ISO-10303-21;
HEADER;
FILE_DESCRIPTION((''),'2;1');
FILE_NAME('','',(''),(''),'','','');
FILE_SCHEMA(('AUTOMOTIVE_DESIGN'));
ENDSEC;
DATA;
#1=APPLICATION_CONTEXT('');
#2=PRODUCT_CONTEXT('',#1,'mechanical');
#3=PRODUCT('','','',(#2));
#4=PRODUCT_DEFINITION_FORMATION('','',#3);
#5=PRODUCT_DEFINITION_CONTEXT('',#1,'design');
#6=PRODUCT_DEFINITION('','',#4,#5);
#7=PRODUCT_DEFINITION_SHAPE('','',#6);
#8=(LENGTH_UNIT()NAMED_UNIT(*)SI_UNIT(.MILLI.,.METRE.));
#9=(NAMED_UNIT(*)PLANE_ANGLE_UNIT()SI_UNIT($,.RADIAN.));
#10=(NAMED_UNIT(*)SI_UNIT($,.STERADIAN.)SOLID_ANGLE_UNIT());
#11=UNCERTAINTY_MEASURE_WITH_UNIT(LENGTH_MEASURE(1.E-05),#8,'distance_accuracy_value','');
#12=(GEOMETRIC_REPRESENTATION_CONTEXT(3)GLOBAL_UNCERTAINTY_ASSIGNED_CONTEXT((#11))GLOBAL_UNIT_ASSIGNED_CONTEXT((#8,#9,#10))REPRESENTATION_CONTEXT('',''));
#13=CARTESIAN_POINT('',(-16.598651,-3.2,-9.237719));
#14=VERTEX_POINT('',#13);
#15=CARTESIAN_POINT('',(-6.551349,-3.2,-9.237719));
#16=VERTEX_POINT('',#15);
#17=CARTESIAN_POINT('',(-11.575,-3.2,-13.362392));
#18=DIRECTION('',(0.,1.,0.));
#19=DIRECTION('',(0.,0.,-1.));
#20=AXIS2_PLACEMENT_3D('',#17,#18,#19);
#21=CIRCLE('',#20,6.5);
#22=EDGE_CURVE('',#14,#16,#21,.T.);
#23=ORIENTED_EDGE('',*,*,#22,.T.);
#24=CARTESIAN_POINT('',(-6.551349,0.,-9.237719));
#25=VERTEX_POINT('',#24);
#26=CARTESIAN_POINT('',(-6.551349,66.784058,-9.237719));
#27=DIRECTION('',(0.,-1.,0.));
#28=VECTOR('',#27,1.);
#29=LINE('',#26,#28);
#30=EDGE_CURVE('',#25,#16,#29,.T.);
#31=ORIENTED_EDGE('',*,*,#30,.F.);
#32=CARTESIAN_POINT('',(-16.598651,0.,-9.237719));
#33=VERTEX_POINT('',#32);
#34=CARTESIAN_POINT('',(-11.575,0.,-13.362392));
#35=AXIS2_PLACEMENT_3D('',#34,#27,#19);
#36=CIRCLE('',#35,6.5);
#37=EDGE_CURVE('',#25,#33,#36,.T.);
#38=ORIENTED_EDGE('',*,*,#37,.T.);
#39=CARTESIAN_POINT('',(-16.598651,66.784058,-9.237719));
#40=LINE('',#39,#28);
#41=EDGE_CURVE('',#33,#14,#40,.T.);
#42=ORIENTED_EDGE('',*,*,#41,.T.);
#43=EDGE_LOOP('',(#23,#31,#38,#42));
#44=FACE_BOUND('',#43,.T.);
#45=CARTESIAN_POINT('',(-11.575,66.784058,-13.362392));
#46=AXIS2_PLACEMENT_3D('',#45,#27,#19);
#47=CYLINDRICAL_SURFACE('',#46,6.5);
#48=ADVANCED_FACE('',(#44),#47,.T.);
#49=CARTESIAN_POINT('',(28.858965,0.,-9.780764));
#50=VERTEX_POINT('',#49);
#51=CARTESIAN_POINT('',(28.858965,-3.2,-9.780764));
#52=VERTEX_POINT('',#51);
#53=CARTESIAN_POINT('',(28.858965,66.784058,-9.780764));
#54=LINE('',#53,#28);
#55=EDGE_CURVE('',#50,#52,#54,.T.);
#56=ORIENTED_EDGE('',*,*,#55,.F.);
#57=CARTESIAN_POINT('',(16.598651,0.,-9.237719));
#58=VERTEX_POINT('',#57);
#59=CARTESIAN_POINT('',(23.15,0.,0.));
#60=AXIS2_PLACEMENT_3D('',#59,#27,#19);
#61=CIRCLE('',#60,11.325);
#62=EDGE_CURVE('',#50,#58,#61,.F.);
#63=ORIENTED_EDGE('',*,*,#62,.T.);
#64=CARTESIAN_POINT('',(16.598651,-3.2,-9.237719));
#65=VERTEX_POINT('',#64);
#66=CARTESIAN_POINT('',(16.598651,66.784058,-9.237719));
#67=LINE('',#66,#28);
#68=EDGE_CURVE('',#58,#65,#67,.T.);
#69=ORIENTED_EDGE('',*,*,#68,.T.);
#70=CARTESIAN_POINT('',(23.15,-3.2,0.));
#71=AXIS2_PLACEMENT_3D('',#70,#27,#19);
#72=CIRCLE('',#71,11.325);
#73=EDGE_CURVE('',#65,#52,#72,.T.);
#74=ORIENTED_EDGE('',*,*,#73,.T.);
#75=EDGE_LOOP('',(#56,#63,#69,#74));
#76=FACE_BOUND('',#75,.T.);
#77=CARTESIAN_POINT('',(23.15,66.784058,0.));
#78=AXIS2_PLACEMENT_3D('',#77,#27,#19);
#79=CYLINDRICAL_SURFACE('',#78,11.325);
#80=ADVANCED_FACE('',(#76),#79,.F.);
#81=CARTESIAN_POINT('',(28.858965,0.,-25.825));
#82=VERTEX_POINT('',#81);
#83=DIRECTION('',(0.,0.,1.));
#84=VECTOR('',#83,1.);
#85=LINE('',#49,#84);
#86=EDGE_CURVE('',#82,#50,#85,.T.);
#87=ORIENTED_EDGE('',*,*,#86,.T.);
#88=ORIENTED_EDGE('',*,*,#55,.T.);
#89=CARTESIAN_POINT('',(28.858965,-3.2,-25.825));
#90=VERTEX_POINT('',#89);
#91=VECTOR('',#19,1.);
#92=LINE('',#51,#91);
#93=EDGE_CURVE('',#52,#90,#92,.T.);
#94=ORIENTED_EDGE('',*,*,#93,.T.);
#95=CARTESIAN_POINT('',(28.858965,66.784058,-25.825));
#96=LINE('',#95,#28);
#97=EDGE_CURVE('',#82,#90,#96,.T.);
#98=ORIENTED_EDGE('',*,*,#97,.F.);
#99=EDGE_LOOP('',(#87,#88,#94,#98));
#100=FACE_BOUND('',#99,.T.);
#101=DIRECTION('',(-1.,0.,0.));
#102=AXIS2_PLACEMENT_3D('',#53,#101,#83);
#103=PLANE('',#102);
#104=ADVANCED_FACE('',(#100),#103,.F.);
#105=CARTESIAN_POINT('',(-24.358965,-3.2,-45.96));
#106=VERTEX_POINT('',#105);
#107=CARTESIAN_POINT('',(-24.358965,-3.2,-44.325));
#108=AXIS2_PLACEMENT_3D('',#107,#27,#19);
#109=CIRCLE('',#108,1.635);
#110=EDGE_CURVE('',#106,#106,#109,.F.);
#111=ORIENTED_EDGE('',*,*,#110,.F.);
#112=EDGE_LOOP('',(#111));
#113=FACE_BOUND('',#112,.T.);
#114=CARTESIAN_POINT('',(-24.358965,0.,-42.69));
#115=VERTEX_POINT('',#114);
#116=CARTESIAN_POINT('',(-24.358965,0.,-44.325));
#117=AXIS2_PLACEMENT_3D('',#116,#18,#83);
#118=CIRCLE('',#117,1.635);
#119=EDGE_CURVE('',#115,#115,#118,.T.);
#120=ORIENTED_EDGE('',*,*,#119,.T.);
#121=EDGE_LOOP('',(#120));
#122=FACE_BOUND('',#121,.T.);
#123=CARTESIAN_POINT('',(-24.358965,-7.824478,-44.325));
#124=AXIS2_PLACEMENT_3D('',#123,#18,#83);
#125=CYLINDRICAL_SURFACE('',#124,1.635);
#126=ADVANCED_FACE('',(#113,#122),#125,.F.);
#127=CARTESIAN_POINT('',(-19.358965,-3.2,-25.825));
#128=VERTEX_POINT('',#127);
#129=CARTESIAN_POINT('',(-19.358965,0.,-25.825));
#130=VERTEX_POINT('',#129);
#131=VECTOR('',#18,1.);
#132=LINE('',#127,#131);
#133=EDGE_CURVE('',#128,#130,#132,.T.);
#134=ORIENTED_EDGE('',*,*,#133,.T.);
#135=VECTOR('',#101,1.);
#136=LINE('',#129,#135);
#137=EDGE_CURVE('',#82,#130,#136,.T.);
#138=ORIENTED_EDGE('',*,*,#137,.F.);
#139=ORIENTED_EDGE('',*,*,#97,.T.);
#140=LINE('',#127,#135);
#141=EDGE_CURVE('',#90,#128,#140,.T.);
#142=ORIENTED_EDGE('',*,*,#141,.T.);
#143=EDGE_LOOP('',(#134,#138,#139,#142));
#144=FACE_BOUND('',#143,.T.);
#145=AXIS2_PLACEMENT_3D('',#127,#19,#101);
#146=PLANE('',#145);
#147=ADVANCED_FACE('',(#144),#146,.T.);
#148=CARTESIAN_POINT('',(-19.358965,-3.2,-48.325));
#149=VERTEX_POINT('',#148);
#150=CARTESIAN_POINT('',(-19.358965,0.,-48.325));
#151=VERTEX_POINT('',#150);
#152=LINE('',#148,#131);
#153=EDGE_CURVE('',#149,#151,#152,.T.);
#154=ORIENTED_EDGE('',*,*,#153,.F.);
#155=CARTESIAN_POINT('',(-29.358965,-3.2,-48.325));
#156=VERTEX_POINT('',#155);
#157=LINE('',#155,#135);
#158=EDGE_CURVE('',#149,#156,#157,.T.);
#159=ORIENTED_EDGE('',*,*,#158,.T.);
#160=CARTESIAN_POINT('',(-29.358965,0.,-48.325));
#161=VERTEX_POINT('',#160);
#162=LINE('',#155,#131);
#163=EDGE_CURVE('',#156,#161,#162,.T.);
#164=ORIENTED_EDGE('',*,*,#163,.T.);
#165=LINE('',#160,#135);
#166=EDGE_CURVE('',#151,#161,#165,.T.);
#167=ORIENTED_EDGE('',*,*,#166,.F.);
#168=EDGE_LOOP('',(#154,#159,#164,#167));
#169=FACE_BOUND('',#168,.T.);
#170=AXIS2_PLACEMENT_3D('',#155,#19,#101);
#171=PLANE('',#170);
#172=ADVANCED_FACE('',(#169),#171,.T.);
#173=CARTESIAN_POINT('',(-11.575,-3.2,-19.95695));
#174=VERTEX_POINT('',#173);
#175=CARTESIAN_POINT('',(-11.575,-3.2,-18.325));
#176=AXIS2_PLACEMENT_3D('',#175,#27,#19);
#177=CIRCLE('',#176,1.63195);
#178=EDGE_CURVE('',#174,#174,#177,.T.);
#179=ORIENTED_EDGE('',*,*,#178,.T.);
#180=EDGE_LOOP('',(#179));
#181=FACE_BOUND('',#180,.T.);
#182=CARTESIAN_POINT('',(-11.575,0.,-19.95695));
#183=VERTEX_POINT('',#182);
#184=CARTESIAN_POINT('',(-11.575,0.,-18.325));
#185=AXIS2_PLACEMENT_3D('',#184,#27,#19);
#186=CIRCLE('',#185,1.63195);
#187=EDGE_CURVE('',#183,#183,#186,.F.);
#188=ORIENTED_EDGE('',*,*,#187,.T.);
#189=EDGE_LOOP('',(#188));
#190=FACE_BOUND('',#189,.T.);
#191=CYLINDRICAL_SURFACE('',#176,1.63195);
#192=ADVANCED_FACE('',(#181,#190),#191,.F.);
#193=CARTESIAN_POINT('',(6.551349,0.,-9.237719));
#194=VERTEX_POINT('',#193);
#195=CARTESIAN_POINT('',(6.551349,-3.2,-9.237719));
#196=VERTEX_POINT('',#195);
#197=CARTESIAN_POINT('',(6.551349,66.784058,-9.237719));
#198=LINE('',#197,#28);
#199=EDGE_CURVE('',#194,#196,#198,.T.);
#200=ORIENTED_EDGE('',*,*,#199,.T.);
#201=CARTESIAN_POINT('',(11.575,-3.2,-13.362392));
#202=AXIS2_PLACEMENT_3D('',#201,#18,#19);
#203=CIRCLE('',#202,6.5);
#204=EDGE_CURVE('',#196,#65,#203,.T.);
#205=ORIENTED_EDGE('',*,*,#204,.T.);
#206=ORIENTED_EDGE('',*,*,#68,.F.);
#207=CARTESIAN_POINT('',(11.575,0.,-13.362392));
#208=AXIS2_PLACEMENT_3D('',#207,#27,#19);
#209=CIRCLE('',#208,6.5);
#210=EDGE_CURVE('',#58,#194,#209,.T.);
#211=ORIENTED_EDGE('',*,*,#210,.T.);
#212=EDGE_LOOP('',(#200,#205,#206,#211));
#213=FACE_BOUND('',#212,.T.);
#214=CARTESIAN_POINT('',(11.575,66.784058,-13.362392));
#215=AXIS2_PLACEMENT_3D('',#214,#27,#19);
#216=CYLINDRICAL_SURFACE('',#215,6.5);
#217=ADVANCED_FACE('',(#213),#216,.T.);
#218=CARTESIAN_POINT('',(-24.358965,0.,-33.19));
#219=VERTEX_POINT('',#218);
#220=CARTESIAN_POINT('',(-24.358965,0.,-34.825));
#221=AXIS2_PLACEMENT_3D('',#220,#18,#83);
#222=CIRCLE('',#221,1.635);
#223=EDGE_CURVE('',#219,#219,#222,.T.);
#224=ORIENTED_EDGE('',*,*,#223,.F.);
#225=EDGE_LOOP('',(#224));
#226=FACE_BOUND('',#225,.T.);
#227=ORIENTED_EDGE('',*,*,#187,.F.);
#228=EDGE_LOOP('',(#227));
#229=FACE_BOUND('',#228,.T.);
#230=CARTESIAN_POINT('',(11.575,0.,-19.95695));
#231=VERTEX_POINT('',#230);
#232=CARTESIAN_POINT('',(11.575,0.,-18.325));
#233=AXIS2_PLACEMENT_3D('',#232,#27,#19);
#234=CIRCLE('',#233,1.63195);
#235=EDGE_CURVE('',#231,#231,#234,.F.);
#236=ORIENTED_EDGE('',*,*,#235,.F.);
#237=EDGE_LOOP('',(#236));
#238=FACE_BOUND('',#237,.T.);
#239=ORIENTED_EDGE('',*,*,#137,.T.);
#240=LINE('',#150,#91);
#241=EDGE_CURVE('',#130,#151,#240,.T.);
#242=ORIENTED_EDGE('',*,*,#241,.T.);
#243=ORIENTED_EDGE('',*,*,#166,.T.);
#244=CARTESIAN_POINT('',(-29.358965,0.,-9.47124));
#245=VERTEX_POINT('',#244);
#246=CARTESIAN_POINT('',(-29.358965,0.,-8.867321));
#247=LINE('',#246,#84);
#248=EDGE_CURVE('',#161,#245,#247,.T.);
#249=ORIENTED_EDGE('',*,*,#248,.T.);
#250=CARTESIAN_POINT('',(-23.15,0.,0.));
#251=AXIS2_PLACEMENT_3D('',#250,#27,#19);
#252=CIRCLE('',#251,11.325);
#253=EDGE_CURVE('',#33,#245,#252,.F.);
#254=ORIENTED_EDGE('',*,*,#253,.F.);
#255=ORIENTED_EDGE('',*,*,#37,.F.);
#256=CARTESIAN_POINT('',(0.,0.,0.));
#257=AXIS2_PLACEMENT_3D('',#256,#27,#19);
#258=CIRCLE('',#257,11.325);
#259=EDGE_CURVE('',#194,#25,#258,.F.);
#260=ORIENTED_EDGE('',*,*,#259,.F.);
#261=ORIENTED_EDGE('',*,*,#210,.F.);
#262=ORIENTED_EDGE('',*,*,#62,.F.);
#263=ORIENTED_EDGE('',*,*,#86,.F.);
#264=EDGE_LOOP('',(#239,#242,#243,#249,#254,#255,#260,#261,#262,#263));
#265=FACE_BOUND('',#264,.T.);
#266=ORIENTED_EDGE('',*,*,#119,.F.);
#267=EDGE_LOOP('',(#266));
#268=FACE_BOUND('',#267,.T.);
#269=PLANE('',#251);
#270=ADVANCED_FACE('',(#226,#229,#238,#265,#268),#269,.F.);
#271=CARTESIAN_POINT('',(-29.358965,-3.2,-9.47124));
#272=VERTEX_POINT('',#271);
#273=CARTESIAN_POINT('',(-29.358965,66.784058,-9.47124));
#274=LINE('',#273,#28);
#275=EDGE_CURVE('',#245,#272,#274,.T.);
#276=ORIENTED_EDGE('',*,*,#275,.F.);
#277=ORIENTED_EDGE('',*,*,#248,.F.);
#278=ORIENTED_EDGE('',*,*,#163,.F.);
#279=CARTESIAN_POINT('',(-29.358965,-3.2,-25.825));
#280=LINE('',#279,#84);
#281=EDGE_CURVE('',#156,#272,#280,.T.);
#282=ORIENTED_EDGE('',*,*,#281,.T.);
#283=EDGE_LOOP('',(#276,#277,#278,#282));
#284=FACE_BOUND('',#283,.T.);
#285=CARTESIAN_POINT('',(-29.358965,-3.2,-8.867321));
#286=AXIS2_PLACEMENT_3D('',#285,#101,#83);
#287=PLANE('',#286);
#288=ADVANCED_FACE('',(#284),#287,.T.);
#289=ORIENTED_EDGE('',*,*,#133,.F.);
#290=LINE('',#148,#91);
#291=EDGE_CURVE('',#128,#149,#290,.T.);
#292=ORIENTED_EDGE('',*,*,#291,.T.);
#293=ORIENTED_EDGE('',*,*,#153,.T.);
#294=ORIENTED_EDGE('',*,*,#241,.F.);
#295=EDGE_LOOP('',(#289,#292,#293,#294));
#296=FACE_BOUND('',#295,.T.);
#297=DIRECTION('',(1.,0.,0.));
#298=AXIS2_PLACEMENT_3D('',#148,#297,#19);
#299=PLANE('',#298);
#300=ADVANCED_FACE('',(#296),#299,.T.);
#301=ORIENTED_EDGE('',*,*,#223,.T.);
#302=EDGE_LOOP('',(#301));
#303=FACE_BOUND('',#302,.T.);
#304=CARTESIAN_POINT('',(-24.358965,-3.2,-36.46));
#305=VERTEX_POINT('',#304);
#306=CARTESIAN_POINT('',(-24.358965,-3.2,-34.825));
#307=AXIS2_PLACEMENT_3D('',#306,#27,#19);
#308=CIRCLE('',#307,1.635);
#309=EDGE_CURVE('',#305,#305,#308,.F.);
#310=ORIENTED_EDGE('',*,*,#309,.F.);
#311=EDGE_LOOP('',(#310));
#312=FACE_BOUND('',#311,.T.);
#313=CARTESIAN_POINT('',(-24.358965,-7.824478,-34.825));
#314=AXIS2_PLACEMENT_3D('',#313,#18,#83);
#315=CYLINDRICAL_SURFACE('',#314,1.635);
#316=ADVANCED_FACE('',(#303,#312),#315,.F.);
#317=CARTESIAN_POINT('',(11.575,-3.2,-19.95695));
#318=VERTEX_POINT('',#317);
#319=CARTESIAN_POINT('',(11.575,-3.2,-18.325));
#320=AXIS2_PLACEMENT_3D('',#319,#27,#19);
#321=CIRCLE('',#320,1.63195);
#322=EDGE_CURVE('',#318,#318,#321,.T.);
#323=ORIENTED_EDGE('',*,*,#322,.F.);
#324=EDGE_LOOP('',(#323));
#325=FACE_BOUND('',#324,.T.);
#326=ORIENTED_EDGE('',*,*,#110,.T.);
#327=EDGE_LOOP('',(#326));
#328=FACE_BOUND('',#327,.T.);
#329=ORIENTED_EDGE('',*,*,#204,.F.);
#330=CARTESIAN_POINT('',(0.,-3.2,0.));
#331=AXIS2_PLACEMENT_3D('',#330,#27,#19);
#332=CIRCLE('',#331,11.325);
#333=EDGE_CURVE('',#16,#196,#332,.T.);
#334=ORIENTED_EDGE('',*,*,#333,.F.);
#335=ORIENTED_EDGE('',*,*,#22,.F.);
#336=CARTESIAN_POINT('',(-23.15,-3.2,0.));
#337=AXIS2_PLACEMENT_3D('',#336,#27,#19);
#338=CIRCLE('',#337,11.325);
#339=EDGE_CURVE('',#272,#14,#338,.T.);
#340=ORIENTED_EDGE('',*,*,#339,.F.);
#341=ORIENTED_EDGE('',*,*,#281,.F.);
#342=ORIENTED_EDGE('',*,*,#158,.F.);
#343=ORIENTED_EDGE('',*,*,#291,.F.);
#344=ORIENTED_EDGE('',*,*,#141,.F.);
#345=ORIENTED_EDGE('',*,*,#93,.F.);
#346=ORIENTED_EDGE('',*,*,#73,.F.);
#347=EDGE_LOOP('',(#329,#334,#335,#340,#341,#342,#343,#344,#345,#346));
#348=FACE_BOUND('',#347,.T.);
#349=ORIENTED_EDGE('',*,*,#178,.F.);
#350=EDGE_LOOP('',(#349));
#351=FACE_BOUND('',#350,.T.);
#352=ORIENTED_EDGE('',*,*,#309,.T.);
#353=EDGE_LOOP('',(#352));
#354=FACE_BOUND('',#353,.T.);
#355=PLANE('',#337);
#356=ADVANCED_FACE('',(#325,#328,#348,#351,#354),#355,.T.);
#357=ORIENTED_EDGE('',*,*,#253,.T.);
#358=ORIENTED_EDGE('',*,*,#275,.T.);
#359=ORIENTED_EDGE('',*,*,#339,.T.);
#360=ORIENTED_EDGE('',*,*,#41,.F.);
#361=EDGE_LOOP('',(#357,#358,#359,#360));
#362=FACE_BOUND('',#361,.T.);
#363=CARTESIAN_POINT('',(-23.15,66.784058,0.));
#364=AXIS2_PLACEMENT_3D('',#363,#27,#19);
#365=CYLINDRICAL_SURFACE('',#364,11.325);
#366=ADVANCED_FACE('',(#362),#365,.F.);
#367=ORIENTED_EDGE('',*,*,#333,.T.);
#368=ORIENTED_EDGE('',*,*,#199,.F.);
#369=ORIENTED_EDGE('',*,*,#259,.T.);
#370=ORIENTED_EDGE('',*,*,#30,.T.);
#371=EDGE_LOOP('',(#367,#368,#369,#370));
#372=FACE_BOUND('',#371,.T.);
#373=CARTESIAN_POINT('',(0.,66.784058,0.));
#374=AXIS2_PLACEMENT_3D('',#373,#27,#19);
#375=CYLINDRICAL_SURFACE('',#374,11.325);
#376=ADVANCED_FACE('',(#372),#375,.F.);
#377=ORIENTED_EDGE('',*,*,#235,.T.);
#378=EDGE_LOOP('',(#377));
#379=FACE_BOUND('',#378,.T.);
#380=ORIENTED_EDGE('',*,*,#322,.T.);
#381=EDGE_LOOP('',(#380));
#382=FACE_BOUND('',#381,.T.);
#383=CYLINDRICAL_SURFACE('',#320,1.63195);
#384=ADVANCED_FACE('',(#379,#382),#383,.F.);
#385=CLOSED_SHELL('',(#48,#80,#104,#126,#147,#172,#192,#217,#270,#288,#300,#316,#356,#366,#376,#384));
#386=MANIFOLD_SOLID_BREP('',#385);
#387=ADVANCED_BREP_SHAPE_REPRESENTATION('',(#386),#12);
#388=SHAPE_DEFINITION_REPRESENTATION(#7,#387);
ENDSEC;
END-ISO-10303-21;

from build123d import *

# Parameters (mm, degrees)
BASE_FLANGE1_DEPTH        = 3.2
SKETCH8_R                 = 1.635
CUT_EXTRUDE1_DEPTH        = 3.2
F_4_CLEARANCE_HOLE2_D     = 3.2639
F_4_CLEARANCE_HOLE2_DEPTH = 3.2
F_4_CLEARANCE_HOLE2_TIP   = 0.980574487
CUT_EXTRUDE2_DEPTH        = 3.2


# Sheet-metal steps are written as plain solids
with BuildPart() as part:
    # Sketch3 → Base-Flange1 (new body)
    with BuildSketch(Plane(origin=(0, 0, 0), x_dir=(1, 0, 0), z_dir=(0, 1, 0))):
        with BuildLine():
            Line((-29.358964924, 8.867320879), (-29.358964924, 25.825))
            Line((-29.358964924, 25.825), (-29.358964924, 48.325))
            Line((-29.358964924, 48.325), (-19.358964924, 48.325))
            Line((-19.358964924, 48.325), (-19.358964924, 25.825))
            Line((-19.358964924, 25.825), (29.358964924, 25.825))
            Line((29.358964924, 25.825), (29.358964924, 8.867320879))
            ThreePointArc((29.358964924, 8.867320879), (23.15, 10.825), (16.941035076, 8.867320879))
            ThreePointArc((16.941035076, 8.867320879), (11.575, 6.362392354), (6.208964924, 8.867320879))
            ThreePointArc((6.208964924, 8.867320879), (0, 10.825), (-6.208964924, 8.867320879))
            ThreePointArc((-6.208964924, 8.867320879), (-11.575, 6.362392354), (-16.941035076, 8.867320879))
            ThreePointArc((-16.941035076, 8.867320879), (-23.15, 10.825), (-29.358964924, 8.867320879))
        make_face()
    extrude(amount=-BASE_FLANGE1_DEPTH)

    # Sketch8 → Cut-Extrude1 (cut)
    with BuildSketch(Plane(origin=(0, 0, 0), x_dir=(1, 0, 0), z_dir=(0, 1, 0))):
        with Locations(Location((-24.358964924, 44.325, 0), (0, 0, 270))):
            Circle(SKETCH8_R)
        with Locations(Location((-24.358964924, 34.825, 0), (0, 0, 270))):
            Circle(SKETCH8_R)
    extrude(amount=-CUT_EXTRUDE1_DEPTH, mode=Mode.SUBTRACT)

    # #4 Clearance Hole2
    with Locations(Plane.XZ.offset(3.2)):
        with Locations((11.575, -18.325), (-11.575, -18.325)):
            Hole(F_4_CLEARANCE_HOLE2_D / 2, depth=F_4_CLEARANCE_HOLE2_DEPTH)
            with Locations((0, 0, -(F_4_CLEARANCE_HOLE2_DEPTH + F_4_CLEARANCE_HOLE2_TIP / 2))):  # 118° drill point
                Cone(0, F_4_CLEARANCE_HOLE2_D / 2, F_4_CLEARANCE_HOLE2_TIP, mode=Mode.SUBTRACT)

    # Sketch11 → Cut-Extrude2 (cut)
    with BuildSketch(Plane.XZ.offset(3.2)):
        with BuildLine():
            Line((-29.645753142, -9.276896902), (-29.645753142, -3.891418545))
            Line((-29.645753142, -3.891418545), (33.433786827, -3.891418545))
            Line((33.433786827, -3.891418545), (33.433786827, -25.825))
            Line((33.433786827, -25.825), (28.858964924, -25.825))
            Line((28.858964924, -25.825), (28.858964924, -9.780764004))
            ThreePointArc((28.858964924, -9.780764004), (22.648874034, -11.313907272), (16.598650974, -9.237718925))
            ThreePointArc((16.598650974, -9.237718925), (11.575, -6.862392354), (6.551349026, -9.237718925))
            ThreePointArc((6.551349026, -9.237718925), (0, -11.325), (-6.551349026, -9.237718925))
            ThreePointArc((-6.551349026, -9.237718925), (-11.575, -6.862392354), (-16.598650974, -9.237718925))
            ThreePointArc((-16.598650974, -9.237718925), (-23.115993323, -11.324948942), (-29.645753142, -9.276896902))
        make_face()
    extrude(amount=-CUT_EXTRUDE2_DEPTH, mode=Mode.SUBTRACT)


solid = part.part
